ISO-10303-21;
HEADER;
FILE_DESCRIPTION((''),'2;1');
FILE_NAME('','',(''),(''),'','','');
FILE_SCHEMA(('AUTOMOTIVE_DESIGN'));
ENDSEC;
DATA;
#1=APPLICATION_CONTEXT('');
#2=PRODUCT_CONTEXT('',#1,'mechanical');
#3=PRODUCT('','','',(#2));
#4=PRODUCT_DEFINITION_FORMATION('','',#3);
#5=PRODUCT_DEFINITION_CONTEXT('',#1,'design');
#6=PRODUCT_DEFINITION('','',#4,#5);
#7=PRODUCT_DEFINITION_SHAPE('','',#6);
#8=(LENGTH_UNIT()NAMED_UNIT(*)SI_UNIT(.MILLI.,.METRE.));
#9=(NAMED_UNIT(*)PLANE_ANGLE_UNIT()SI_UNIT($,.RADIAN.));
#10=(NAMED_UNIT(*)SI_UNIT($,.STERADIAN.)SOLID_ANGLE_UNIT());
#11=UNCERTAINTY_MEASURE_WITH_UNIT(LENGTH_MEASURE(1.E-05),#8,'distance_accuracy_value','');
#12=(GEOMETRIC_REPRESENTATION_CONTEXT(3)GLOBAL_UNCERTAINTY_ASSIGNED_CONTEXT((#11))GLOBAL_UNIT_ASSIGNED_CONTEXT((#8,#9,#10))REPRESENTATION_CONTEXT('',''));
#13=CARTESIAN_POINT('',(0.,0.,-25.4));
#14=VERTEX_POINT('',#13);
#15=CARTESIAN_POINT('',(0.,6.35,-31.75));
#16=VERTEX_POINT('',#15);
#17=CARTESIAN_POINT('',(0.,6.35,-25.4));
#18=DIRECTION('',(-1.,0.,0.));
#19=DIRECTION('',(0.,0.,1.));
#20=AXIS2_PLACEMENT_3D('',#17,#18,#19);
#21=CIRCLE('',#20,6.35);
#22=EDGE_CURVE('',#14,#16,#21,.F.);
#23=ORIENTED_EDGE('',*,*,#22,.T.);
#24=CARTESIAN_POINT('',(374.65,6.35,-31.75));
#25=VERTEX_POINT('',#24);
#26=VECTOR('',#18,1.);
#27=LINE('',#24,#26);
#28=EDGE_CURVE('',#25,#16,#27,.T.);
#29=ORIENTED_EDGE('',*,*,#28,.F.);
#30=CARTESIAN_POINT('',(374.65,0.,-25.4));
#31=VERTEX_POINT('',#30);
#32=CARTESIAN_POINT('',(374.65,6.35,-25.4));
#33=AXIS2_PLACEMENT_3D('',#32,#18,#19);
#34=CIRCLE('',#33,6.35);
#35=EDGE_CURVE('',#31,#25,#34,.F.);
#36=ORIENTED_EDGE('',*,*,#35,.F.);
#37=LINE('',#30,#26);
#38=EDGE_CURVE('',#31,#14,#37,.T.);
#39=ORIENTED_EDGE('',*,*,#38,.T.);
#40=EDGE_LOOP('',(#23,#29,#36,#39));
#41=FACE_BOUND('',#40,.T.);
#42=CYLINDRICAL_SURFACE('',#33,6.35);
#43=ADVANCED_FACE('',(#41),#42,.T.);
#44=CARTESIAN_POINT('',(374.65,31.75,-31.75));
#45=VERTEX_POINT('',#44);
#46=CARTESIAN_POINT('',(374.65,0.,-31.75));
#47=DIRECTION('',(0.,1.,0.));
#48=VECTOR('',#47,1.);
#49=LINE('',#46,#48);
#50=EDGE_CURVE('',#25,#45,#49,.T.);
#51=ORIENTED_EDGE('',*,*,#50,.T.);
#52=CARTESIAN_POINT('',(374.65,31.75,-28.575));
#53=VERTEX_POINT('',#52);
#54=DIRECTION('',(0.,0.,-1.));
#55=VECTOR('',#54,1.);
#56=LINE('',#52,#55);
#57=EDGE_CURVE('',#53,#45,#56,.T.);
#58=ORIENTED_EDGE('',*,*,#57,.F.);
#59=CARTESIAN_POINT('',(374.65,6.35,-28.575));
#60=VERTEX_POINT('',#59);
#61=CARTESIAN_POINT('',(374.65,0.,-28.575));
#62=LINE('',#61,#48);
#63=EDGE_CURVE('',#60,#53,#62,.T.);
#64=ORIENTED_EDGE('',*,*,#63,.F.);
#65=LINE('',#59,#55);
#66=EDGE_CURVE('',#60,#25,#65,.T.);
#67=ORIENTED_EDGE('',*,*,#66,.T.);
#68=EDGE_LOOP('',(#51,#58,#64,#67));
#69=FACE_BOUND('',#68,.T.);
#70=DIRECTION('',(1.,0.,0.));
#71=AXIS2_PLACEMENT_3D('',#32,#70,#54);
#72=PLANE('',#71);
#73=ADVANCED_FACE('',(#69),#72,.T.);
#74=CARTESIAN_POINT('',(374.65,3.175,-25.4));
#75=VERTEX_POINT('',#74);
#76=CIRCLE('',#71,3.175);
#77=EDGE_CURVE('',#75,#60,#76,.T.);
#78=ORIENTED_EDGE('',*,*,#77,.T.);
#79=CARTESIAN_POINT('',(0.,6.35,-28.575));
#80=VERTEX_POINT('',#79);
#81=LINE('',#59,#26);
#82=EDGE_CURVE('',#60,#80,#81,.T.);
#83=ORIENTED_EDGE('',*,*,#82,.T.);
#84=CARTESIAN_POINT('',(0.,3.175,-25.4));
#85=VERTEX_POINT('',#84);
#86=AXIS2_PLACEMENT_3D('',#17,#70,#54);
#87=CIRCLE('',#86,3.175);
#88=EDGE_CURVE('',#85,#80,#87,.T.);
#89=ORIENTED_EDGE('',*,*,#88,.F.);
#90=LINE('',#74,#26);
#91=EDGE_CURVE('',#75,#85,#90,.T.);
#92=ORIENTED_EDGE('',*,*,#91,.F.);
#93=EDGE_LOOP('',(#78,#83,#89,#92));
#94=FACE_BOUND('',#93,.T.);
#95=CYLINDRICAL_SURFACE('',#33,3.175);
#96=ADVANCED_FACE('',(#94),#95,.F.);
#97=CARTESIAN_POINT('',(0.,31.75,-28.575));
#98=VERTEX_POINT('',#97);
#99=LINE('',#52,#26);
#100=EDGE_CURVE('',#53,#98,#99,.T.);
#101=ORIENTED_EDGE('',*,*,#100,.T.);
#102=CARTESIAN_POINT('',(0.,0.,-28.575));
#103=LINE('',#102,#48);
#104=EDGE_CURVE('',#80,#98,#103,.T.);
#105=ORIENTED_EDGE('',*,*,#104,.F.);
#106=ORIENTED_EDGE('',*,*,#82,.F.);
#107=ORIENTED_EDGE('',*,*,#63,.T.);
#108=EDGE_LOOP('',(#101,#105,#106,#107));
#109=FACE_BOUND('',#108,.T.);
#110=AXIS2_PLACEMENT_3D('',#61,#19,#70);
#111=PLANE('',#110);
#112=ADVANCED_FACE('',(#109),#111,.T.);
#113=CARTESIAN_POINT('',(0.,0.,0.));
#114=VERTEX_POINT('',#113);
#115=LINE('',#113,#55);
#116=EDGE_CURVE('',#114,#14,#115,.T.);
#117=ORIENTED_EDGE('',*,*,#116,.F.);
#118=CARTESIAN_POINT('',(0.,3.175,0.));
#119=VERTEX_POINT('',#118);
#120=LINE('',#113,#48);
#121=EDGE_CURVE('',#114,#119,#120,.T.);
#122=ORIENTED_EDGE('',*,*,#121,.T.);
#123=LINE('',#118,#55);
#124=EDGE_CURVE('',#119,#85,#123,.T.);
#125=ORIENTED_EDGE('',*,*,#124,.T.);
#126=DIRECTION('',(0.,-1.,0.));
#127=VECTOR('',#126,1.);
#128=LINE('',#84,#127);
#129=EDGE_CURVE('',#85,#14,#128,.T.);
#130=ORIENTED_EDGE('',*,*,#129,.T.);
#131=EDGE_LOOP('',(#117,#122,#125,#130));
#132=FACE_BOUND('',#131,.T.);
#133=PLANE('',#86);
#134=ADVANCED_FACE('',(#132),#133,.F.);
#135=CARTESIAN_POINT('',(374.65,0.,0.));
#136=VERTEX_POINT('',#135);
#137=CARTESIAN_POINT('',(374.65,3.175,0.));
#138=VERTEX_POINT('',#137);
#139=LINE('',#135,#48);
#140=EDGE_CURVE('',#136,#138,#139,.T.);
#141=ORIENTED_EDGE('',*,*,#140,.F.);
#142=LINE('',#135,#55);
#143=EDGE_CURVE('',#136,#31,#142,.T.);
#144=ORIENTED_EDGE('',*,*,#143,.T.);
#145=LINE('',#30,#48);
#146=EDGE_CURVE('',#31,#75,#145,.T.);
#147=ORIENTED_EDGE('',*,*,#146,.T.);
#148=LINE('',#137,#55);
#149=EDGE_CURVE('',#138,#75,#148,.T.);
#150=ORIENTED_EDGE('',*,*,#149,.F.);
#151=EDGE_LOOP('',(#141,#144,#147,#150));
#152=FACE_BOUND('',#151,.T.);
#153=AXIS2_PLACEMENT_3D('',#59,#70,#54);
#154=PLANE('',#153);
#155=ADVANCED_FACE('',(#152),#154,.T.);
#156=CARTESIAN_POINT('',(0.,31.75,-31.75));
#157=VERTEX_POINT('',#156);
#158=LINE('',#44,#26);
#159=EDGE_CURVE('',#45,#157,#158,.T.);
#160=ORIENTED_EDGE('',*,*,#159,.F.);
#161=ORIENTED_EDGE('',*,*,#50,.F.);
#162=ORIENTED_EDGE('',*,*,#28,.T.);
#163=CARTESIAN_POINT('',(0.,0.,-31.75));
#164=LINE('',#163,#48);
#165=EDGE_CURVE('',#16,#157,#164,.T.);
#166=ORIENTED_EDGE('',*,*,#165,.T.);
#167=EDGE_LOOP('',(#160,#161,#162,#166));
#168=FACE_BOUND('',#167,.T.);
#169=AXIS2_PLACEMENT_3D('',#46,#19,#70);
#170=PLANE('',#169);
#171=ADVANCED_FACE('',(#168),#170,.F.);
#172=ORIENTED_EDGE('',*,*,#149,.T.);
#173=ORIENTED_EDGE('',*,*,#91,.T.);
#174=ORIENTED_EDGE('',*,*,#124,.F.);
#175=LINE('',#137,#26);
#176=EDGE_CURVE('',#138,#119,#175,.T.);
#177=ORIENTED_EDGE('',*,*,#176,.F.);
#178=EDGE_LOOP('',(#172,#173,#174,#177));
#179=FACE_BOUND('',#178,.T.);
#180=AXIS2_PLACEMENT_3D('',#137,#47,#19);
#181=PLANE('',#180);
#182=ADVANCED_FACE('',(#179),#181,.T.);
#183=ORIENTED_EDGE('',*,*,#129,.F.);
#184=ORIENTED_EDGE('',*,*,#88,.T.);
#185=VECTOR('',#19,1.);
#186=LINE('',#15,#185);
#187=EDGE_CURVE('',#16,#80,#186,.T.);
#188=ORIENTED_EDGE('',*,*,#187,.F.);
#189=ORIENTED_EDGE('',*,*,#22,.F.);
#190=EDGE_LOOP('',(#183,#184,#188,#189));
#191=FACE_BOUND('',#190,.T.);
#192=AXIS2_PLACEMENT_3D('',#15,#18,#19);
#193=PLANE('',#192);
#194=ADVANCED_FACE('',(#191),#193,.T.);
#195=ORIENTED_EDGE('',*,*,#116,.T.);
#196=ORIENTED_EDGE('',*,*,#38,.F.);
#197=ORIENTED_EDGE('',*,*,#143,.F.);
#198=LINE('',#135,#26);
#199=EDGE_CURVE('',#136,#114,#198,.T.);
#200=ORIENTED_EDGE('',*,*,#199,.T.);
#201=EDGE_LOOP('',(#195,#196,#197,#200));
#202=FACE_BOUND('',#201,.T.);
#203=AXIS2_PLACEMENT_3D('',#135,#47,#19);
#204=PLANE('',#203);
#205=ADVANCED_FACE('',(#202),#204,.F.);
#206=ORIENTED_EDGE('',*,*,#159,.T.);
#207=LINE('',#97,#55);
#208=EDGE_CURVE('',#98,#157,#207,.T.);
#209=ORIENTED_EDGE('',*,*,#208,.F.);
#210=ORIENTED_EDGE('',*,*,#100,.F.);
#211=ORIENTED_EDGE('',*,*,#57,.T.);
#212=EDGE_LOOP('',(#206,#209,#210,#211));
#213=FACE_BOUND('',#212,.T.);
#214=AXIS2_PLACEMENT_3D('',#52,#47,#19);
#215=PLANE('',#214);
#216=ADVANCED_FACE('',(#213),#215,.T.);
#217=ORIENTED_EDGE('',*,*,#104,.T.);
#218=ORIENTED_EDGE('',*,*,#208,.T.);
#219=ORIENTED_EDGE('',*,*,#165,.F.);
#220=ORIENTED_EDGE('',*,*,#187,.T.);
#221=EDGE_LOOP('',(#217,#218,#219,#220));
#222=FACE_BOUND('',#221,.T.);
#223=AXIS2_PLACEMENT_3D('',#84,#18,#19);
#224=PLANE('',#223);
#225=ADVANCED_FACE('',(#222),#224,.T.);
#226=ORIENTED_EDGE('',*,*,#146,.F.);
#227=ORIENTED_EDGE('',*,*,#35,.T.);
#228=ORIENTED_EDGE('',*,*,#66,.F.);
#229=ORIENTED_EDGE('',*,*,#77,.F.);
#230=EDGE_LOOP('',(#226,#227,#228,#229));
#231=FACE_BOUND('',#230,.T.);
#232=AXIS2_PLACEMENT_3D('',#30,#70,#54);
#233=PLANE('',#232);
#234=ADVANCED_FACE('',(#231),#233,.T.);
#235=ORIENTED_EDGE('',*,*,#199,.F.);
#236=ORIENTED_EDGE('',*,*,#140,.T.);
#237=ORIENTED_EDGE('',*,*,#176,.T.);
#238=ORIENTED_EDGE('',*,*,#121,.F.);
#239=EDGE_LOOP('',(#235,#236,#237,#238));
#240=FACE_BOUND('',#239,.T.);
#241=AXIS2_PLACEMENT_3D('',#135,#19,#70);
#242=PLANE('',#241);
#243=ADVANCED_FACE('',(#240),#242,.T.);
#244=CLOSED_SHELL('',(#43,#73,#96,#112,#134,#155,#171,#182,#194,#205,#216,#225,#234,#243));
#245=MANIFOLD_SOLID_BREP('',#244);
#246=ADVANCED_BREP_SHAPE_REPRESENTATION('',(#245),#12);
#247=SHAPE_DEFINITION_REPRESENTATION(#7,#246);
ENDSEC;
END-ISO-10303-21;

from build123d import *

# Parameters (mm, degrees)
BASE_FLANGE1_DEPTH = 374.65


# Sheet-metal steps are written as plain solids
with BuildPart() as part:
    # Sketch1 → Base-Flange1 (new body)
    with BuildSketch(Plane(origin=(0, 0, 0), x_dir=(0, 0, -1), z_dir=(1, 0, 0))):
        with BuildLine():
            Line((0, 0), (25.4, 0))
            ThreePointArc((25.4, 0), (29.890128061, 1.859871939), (31.75, 6.35))
            Line((31.75, 6.35), (31.75, 31.75))
            Line((31.75, 31.75), (28.575, 31.75))
            Line((28.575, 31.75), (28.575, 6.35))
            ThreePointArc((28.575, 6.35), (27.64506403, 4.10493597), (25.4, 3.175))
            Line((25.4, 3.175), (0, 3.175))
            Line((0, 3.175), (0, 0))
        make_face()
    extrude(amount=BASE_FLANGE1_DEPTH)


solid = part.part
